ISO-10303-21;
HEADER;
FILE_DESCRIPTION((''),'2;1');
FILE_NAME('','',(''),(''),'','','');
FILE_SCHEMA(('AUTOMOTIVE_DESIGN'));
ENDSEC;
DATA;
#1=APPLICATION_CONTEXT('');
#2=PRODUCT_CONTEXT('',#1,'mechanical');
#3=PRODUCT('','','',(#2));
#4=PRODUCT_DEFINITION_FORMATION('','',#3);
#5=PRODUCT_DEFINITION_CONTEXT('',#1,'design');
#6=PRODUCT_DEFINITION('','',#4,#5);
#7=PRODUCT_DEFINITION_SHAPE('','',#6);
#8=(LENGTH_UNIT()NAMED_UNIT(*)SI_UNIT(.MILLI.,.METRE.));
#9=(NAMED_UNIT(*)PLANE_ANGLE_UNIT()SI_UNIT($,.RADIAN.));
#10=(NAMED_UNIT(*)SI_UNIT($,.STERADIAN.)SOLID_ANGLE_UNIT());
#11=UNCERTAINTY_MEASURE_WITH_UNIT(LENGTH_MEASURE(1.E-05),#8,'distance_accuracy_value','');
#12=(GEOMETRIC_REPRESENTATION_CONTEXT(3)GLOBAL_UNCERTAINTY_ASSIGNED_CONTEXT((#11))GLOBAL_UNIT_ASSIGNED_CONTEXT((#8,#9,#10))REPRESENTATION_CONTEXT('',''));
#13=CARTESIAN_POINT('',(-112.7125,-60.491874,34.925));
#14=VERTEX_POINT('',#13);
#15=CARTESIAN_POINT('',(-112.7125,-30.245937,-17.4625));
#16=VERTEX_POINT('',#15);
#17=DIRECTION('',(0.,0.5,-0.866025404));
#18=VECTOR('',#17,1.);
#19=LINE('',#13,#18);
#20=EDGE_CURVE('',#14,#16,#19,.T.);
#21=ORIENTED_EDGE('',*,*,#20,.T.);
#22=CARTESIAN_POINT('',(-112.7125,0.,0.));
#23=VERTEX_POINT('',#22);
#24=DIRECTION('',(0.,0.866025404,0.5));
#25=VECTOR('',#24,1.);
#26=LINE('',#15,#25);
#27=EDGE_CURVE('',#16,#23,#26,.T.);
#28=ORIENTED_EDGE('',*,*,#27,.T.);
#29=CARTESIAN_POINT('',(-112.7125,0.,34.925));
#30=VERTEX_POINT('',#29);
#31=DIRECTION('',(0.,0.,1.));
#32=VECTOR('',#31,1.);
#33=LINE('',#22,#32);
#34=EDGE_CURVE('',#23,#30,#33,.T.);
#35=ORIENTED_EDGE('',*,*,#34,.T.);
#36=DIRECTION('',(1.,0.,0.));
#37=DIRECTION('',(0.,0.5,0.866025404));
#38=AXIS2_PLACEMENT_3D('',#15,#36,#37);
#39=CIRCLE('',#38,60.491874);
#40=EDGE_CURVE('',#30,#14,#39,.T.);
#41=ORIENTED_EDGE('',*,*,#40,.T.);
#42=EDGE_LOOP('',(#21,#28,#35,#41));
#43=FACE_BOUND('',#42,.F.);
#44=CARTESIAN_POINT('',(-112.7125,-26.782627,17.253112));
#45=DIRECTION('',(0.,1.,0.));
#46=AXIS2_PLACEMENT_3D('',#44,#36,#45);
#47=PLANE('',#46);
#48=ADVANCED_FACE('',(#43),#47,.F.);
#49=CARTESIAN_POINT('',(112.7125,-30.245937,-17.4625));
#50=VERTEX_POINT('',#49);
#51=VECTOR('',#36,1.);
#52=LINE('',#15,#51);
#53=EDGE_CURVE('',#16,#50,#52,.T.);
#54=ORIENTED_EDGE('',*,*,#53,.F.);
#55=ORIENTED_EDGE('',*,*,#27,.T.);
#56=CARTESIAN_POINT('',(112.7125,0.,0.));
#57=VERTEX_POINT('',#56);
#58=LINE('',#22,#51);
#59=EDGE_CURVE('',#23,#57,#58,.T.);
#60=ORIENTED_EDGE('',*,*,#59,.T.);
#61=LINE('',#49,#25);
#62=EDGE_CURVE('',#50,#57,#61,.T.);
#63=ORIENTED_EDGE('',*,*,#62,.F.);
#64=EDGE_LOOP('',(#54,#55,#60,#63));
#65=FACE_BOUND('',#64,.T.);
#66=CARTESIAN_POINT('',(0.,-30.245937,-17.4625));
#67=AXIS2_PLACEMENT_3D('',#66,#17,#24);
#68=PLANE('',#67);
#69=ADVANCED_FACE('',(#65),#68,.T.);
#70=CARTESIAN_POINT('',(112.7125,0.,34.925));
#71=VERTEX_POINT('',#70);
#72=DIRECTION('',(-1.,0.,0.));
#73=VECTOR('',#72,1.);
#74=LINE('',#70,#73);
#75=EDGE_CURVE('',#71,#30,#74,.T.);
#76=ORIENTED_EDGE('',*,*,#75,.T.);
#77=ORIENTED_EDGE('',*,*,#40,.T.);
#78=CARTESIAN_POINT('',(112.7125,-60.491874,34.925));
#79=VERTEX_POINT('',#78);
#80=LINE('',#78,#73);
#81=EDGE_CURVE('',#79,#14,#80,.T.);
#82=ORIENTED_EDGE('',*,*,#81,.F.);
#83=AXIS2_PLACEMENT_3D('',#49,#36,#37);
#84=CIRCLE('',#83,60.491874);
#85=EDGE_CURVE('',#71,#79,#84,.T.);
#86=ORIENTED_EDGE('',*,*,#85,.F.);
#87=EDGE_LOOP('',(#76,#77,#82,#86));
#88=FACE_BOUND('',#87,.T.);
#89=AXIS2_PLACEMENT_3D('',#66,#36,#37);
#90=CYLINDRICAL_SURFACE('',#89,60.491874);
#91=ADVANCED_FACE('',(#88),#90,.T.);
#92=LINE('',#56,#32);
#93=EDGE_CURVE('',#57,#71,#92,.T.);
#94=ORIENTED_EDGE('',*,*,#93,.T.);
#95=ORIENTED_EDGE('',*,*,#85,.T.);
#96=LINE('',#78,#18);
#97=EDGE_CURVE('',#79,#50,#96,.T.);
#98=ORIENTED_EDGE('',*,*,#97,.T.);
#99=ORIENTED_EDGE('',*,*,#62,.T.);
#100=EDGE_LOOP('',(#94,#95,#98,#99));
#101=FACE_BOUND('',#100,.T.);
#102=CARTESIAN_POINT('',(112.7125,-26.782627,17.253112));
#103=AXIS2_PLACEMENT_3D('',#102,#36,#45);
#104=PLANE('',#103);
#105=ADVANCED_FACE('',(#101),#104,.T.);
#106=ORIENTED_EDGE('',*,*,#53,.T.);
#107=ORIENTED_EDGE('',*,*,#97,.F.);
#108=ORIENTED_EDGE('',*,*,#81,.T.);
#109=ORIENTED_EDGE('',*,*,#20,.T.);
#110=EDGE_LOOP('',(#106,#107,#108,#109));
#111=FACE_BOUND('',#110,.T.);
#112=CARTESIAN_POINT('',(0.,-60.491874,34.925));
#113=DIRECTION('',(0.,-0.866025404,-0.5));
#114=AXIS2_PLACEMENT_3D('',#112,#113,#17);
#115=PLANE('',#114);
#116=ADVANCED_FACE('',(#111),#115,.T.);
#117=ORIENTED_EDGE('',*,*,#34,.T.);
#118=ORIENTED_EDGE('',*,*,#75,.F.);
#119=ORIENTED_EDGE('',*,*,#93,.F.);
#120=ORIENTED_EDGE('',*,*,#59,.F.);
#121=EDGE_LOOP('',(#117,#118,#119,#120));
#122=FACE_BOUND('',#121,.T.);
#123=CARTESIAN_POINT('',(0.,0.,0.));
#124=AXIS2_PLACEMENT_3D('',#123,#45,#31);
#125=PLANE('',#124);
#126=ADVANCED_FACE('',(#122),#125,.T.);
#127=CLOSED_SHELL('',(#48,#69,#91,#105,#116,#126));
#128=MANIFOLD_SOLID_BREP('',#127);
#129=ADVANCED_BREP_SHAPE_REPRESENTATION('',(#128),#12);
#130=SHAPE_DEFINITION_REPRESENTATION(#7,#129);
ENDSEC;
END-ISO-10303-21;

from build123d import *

# Parameters (mm, degrees)
F1_DEPTH = 112.7125


# Not quite as in the source:
# - a feature of the source that left no trace in its solid (it failed there, or was rolled back) is left out


with BuildPart() as f1:
    # F0 (on Right) → F1 (new body, symmetric)
    with BuildSketch(Plane.YZ):
        with BuildLine():
            Line((-60.4918744543, 34.925), (-30.2459372272, -17.4625))
            Line((-30.2459372272, -17.4625), (0, 0))
            Line((0, 0), (0, 34.925))
            ThreePointArc((0, 34.925), (-30.2459372272, 43.0293744543), (-60.4918744543, 34.925))
        make_face()
    extrude(amount=F1_DEPTH, both=True)


solid = f1.part
